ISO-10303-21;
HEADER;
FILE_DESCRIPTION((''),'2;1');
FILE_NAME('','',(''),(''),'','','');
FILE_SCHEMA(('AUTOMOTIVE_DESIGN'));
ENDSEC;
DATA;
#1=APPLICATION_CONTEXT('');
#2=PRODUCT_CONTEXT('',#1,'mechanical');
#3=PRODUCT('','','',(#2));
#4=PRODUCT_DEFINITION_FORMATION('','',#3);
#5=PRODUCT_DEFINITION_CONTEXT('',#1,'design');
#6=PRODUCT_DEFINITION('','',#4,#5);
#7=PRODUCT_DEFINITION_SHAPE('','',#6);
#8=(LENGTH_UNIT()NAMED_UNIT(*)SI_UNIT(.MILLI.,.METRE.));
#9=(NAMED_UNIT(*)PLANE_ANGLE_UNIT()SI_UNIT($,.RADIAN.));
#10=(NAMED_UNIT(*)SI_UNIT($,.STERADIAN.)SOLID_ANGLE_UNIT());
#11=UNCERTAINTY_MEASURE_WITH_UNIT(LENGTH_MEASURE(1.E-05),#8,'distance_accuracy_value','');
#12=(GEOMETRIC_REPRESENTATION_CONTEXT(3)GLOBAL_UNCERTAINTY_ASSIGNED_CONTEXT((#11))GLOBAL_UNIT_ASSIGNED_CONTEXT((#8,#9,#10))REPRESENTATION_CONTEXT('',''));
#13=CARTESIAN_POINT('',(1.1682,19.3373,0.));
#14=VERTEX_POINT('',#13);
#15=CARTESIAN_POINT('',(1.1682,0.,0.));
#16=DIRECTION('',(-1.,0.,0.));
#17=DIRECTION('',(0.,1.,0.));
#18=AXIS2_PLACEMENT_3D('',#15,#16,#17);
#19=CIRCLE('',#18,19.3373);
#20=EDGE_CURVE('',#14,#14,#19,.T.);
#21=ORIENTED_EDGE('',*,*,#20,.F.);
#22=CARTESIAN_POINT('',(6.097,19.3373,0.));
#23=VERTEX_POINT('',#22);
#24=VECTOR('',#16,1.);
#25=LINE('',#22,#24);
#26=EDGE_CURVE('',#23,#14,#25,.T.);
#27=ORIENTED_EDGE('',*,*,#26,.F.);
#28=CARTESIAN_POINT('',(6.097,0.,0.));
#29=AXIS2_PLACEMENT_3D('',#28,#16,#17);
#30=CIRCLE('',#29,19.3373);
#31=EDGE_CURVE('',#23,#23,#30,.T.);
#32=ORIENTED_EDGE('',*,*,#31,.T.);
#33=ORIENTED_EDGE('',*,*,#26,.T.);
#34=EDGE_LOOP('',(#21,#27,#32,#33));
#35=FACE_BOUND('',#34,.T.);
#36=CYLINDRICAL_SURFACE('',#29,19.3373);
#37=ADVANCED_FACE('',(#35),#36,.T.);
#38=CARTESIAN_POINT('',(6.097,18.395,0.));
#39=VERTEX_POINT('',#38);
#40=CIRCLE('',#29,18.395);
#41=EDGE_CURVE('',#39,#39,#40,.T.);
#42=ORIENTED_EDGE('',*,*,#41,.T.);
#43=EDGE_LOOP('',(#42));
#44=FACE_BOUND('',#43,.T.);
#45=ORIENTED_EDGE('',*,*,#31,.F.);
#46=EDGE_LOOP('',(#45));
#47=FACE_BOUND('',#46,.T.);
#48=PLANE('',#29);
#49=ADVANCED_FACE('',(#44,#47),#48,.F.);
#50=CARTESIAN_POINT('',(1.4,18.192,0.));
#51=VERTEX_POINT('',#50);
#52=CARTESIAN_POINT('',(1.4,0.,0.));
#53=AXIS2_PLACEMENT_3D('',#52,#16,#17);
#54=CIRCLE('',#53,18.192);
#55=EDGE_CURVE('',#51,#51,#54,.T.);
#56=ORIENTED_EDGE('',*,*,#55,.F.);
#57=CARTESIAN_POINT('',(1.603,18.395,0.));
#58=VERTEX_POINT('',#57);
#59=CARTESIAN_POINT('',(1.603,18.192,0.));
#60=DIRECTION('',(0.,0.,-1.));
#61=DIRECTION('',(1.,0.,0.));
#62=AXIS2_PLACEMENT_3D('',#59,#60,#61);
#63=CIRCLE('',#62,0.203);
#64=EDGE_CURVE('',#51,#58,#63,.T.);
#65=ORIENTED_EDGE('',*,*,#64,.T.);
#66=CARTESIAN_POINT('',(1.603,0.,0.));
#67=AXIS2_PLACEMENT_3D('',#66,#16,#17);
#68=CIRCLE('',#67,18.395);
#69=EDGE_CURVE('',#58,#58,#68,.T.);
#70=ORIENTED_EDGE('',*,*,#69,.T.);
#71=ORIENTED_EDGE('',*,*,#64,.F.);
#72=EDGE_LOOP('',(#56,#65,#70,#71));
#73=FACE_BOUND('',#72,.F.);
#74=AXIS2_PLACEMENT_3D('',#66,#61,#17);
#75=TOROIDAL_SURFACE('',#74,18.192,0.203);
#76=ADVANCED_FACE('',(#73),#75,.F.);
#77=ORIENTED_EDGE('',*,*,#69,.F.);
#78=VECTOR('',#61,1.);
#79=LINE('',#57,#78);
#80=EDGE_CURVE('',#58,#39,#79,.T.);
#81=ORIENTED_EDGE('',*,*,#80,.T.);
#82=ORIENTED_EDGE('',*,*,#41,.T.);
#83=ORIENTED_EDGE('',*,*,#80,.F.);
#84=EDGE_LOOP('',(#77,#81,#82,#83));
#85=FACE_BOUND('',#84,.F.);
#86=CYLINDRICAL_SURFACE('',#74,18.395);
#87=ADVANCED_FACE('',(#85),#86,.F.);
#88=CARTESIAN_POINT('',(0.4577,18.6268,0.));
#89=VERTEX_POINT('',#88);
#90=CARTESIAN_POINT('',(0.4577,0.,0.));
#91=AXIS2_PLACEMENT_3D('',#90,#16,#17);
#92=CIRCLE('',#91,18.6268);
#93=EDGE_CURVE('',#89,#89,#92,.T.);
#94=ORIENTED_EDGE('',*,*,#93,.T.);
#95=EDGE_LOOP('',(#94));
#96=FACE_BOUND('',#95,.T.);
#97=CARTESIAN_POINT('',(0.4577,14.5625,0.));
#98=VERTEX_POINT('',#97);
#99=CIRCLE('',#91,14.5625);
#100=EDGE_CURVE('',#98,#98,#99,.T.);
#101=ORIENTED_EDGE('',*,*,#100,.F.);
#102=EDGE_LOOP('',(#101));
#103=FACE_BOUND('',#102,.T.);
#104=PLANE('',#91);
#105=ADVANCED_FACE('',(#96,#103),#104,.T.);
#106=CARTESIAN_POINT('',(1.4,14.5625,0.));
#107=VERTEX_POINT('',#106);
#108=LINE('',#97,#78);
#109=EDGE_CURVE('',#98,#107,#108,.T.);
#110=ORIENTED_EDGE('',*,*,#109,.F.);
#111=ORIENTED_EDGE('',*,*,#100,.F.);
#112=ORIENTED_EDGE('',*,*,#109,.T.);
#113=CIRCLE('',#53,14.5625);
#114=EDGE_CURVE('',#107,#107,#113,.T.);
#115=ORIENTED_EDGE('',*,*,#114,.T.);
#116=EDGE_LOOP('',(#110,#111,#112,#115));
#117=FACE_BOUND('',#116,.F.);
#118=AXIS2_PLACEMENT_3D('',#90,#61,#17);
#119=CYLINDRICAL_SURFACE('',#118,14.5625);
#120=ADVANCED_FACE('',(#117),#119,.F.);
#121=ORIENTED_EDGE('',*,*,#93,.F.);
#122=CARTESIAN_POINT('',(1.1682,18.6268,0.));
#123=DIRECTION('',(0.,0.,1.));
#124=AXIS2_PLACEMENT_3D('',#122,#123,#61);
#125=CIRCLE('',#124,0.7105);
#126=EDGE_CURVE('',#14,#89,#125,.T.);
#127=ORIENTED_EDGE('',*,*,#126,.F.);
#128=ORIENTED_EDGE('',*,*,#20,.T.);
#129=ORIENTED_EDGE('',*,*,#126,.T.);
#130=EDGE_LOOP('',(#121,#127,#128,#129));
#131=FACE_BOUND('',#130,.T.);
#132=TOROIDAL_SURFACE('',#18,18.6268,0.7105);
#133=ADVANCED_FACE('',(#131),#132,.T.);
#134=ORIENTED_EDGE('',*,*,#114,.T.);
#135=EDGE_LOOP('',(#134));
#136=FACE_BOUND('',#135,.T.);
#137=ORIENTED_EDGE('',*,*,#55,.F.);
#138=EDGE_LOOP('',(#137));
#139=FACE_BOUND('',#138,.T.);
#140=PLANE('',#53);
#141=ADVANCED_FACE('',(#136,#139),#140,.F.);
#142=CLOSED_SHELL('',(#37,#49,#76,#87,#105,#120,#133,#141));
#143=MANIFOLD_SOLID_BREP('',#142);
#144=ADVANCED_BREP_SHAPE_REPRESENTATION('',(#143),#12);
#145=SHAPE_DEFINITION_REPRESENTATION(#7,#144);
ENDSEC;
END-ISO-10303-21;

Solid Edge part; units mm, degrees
sketch "Sketch1" plane through (0, 0, 0) normal (0, 0, 1) x (1, 0, 0)
  line L0 (0.4577, 18.6268) -> (0.4577, 14.5625)
  line L1 (0.4577, 14.5625) -> (1.4, 14.5625)
  line L2 (1.4, 14.5625) -> (1.4, 18.192)
  arc A0 (1.4, 18.192) -> (1.603, 18.395) centre (1.603, 18.192) cw
  line L3 (1.603, 18.395) -> (6.097, 18.395)
  line L4 (6.097, 18.395) -> (6.097, 19.3373)
  line L5 (6.097, 19.3373) -> (1.1682, 19.3373)
  arc A1 (1.1682, 19.3373) -> (0.4577, 18.6268) centre (1.1682, 18.6268) ccw
revolve "RevolvedProtrusion1" add sketch "Sketch1" angle 360 about axis through (7, 0, 0) along (-1, 0, 0)
properties part number "TRAB00250"
